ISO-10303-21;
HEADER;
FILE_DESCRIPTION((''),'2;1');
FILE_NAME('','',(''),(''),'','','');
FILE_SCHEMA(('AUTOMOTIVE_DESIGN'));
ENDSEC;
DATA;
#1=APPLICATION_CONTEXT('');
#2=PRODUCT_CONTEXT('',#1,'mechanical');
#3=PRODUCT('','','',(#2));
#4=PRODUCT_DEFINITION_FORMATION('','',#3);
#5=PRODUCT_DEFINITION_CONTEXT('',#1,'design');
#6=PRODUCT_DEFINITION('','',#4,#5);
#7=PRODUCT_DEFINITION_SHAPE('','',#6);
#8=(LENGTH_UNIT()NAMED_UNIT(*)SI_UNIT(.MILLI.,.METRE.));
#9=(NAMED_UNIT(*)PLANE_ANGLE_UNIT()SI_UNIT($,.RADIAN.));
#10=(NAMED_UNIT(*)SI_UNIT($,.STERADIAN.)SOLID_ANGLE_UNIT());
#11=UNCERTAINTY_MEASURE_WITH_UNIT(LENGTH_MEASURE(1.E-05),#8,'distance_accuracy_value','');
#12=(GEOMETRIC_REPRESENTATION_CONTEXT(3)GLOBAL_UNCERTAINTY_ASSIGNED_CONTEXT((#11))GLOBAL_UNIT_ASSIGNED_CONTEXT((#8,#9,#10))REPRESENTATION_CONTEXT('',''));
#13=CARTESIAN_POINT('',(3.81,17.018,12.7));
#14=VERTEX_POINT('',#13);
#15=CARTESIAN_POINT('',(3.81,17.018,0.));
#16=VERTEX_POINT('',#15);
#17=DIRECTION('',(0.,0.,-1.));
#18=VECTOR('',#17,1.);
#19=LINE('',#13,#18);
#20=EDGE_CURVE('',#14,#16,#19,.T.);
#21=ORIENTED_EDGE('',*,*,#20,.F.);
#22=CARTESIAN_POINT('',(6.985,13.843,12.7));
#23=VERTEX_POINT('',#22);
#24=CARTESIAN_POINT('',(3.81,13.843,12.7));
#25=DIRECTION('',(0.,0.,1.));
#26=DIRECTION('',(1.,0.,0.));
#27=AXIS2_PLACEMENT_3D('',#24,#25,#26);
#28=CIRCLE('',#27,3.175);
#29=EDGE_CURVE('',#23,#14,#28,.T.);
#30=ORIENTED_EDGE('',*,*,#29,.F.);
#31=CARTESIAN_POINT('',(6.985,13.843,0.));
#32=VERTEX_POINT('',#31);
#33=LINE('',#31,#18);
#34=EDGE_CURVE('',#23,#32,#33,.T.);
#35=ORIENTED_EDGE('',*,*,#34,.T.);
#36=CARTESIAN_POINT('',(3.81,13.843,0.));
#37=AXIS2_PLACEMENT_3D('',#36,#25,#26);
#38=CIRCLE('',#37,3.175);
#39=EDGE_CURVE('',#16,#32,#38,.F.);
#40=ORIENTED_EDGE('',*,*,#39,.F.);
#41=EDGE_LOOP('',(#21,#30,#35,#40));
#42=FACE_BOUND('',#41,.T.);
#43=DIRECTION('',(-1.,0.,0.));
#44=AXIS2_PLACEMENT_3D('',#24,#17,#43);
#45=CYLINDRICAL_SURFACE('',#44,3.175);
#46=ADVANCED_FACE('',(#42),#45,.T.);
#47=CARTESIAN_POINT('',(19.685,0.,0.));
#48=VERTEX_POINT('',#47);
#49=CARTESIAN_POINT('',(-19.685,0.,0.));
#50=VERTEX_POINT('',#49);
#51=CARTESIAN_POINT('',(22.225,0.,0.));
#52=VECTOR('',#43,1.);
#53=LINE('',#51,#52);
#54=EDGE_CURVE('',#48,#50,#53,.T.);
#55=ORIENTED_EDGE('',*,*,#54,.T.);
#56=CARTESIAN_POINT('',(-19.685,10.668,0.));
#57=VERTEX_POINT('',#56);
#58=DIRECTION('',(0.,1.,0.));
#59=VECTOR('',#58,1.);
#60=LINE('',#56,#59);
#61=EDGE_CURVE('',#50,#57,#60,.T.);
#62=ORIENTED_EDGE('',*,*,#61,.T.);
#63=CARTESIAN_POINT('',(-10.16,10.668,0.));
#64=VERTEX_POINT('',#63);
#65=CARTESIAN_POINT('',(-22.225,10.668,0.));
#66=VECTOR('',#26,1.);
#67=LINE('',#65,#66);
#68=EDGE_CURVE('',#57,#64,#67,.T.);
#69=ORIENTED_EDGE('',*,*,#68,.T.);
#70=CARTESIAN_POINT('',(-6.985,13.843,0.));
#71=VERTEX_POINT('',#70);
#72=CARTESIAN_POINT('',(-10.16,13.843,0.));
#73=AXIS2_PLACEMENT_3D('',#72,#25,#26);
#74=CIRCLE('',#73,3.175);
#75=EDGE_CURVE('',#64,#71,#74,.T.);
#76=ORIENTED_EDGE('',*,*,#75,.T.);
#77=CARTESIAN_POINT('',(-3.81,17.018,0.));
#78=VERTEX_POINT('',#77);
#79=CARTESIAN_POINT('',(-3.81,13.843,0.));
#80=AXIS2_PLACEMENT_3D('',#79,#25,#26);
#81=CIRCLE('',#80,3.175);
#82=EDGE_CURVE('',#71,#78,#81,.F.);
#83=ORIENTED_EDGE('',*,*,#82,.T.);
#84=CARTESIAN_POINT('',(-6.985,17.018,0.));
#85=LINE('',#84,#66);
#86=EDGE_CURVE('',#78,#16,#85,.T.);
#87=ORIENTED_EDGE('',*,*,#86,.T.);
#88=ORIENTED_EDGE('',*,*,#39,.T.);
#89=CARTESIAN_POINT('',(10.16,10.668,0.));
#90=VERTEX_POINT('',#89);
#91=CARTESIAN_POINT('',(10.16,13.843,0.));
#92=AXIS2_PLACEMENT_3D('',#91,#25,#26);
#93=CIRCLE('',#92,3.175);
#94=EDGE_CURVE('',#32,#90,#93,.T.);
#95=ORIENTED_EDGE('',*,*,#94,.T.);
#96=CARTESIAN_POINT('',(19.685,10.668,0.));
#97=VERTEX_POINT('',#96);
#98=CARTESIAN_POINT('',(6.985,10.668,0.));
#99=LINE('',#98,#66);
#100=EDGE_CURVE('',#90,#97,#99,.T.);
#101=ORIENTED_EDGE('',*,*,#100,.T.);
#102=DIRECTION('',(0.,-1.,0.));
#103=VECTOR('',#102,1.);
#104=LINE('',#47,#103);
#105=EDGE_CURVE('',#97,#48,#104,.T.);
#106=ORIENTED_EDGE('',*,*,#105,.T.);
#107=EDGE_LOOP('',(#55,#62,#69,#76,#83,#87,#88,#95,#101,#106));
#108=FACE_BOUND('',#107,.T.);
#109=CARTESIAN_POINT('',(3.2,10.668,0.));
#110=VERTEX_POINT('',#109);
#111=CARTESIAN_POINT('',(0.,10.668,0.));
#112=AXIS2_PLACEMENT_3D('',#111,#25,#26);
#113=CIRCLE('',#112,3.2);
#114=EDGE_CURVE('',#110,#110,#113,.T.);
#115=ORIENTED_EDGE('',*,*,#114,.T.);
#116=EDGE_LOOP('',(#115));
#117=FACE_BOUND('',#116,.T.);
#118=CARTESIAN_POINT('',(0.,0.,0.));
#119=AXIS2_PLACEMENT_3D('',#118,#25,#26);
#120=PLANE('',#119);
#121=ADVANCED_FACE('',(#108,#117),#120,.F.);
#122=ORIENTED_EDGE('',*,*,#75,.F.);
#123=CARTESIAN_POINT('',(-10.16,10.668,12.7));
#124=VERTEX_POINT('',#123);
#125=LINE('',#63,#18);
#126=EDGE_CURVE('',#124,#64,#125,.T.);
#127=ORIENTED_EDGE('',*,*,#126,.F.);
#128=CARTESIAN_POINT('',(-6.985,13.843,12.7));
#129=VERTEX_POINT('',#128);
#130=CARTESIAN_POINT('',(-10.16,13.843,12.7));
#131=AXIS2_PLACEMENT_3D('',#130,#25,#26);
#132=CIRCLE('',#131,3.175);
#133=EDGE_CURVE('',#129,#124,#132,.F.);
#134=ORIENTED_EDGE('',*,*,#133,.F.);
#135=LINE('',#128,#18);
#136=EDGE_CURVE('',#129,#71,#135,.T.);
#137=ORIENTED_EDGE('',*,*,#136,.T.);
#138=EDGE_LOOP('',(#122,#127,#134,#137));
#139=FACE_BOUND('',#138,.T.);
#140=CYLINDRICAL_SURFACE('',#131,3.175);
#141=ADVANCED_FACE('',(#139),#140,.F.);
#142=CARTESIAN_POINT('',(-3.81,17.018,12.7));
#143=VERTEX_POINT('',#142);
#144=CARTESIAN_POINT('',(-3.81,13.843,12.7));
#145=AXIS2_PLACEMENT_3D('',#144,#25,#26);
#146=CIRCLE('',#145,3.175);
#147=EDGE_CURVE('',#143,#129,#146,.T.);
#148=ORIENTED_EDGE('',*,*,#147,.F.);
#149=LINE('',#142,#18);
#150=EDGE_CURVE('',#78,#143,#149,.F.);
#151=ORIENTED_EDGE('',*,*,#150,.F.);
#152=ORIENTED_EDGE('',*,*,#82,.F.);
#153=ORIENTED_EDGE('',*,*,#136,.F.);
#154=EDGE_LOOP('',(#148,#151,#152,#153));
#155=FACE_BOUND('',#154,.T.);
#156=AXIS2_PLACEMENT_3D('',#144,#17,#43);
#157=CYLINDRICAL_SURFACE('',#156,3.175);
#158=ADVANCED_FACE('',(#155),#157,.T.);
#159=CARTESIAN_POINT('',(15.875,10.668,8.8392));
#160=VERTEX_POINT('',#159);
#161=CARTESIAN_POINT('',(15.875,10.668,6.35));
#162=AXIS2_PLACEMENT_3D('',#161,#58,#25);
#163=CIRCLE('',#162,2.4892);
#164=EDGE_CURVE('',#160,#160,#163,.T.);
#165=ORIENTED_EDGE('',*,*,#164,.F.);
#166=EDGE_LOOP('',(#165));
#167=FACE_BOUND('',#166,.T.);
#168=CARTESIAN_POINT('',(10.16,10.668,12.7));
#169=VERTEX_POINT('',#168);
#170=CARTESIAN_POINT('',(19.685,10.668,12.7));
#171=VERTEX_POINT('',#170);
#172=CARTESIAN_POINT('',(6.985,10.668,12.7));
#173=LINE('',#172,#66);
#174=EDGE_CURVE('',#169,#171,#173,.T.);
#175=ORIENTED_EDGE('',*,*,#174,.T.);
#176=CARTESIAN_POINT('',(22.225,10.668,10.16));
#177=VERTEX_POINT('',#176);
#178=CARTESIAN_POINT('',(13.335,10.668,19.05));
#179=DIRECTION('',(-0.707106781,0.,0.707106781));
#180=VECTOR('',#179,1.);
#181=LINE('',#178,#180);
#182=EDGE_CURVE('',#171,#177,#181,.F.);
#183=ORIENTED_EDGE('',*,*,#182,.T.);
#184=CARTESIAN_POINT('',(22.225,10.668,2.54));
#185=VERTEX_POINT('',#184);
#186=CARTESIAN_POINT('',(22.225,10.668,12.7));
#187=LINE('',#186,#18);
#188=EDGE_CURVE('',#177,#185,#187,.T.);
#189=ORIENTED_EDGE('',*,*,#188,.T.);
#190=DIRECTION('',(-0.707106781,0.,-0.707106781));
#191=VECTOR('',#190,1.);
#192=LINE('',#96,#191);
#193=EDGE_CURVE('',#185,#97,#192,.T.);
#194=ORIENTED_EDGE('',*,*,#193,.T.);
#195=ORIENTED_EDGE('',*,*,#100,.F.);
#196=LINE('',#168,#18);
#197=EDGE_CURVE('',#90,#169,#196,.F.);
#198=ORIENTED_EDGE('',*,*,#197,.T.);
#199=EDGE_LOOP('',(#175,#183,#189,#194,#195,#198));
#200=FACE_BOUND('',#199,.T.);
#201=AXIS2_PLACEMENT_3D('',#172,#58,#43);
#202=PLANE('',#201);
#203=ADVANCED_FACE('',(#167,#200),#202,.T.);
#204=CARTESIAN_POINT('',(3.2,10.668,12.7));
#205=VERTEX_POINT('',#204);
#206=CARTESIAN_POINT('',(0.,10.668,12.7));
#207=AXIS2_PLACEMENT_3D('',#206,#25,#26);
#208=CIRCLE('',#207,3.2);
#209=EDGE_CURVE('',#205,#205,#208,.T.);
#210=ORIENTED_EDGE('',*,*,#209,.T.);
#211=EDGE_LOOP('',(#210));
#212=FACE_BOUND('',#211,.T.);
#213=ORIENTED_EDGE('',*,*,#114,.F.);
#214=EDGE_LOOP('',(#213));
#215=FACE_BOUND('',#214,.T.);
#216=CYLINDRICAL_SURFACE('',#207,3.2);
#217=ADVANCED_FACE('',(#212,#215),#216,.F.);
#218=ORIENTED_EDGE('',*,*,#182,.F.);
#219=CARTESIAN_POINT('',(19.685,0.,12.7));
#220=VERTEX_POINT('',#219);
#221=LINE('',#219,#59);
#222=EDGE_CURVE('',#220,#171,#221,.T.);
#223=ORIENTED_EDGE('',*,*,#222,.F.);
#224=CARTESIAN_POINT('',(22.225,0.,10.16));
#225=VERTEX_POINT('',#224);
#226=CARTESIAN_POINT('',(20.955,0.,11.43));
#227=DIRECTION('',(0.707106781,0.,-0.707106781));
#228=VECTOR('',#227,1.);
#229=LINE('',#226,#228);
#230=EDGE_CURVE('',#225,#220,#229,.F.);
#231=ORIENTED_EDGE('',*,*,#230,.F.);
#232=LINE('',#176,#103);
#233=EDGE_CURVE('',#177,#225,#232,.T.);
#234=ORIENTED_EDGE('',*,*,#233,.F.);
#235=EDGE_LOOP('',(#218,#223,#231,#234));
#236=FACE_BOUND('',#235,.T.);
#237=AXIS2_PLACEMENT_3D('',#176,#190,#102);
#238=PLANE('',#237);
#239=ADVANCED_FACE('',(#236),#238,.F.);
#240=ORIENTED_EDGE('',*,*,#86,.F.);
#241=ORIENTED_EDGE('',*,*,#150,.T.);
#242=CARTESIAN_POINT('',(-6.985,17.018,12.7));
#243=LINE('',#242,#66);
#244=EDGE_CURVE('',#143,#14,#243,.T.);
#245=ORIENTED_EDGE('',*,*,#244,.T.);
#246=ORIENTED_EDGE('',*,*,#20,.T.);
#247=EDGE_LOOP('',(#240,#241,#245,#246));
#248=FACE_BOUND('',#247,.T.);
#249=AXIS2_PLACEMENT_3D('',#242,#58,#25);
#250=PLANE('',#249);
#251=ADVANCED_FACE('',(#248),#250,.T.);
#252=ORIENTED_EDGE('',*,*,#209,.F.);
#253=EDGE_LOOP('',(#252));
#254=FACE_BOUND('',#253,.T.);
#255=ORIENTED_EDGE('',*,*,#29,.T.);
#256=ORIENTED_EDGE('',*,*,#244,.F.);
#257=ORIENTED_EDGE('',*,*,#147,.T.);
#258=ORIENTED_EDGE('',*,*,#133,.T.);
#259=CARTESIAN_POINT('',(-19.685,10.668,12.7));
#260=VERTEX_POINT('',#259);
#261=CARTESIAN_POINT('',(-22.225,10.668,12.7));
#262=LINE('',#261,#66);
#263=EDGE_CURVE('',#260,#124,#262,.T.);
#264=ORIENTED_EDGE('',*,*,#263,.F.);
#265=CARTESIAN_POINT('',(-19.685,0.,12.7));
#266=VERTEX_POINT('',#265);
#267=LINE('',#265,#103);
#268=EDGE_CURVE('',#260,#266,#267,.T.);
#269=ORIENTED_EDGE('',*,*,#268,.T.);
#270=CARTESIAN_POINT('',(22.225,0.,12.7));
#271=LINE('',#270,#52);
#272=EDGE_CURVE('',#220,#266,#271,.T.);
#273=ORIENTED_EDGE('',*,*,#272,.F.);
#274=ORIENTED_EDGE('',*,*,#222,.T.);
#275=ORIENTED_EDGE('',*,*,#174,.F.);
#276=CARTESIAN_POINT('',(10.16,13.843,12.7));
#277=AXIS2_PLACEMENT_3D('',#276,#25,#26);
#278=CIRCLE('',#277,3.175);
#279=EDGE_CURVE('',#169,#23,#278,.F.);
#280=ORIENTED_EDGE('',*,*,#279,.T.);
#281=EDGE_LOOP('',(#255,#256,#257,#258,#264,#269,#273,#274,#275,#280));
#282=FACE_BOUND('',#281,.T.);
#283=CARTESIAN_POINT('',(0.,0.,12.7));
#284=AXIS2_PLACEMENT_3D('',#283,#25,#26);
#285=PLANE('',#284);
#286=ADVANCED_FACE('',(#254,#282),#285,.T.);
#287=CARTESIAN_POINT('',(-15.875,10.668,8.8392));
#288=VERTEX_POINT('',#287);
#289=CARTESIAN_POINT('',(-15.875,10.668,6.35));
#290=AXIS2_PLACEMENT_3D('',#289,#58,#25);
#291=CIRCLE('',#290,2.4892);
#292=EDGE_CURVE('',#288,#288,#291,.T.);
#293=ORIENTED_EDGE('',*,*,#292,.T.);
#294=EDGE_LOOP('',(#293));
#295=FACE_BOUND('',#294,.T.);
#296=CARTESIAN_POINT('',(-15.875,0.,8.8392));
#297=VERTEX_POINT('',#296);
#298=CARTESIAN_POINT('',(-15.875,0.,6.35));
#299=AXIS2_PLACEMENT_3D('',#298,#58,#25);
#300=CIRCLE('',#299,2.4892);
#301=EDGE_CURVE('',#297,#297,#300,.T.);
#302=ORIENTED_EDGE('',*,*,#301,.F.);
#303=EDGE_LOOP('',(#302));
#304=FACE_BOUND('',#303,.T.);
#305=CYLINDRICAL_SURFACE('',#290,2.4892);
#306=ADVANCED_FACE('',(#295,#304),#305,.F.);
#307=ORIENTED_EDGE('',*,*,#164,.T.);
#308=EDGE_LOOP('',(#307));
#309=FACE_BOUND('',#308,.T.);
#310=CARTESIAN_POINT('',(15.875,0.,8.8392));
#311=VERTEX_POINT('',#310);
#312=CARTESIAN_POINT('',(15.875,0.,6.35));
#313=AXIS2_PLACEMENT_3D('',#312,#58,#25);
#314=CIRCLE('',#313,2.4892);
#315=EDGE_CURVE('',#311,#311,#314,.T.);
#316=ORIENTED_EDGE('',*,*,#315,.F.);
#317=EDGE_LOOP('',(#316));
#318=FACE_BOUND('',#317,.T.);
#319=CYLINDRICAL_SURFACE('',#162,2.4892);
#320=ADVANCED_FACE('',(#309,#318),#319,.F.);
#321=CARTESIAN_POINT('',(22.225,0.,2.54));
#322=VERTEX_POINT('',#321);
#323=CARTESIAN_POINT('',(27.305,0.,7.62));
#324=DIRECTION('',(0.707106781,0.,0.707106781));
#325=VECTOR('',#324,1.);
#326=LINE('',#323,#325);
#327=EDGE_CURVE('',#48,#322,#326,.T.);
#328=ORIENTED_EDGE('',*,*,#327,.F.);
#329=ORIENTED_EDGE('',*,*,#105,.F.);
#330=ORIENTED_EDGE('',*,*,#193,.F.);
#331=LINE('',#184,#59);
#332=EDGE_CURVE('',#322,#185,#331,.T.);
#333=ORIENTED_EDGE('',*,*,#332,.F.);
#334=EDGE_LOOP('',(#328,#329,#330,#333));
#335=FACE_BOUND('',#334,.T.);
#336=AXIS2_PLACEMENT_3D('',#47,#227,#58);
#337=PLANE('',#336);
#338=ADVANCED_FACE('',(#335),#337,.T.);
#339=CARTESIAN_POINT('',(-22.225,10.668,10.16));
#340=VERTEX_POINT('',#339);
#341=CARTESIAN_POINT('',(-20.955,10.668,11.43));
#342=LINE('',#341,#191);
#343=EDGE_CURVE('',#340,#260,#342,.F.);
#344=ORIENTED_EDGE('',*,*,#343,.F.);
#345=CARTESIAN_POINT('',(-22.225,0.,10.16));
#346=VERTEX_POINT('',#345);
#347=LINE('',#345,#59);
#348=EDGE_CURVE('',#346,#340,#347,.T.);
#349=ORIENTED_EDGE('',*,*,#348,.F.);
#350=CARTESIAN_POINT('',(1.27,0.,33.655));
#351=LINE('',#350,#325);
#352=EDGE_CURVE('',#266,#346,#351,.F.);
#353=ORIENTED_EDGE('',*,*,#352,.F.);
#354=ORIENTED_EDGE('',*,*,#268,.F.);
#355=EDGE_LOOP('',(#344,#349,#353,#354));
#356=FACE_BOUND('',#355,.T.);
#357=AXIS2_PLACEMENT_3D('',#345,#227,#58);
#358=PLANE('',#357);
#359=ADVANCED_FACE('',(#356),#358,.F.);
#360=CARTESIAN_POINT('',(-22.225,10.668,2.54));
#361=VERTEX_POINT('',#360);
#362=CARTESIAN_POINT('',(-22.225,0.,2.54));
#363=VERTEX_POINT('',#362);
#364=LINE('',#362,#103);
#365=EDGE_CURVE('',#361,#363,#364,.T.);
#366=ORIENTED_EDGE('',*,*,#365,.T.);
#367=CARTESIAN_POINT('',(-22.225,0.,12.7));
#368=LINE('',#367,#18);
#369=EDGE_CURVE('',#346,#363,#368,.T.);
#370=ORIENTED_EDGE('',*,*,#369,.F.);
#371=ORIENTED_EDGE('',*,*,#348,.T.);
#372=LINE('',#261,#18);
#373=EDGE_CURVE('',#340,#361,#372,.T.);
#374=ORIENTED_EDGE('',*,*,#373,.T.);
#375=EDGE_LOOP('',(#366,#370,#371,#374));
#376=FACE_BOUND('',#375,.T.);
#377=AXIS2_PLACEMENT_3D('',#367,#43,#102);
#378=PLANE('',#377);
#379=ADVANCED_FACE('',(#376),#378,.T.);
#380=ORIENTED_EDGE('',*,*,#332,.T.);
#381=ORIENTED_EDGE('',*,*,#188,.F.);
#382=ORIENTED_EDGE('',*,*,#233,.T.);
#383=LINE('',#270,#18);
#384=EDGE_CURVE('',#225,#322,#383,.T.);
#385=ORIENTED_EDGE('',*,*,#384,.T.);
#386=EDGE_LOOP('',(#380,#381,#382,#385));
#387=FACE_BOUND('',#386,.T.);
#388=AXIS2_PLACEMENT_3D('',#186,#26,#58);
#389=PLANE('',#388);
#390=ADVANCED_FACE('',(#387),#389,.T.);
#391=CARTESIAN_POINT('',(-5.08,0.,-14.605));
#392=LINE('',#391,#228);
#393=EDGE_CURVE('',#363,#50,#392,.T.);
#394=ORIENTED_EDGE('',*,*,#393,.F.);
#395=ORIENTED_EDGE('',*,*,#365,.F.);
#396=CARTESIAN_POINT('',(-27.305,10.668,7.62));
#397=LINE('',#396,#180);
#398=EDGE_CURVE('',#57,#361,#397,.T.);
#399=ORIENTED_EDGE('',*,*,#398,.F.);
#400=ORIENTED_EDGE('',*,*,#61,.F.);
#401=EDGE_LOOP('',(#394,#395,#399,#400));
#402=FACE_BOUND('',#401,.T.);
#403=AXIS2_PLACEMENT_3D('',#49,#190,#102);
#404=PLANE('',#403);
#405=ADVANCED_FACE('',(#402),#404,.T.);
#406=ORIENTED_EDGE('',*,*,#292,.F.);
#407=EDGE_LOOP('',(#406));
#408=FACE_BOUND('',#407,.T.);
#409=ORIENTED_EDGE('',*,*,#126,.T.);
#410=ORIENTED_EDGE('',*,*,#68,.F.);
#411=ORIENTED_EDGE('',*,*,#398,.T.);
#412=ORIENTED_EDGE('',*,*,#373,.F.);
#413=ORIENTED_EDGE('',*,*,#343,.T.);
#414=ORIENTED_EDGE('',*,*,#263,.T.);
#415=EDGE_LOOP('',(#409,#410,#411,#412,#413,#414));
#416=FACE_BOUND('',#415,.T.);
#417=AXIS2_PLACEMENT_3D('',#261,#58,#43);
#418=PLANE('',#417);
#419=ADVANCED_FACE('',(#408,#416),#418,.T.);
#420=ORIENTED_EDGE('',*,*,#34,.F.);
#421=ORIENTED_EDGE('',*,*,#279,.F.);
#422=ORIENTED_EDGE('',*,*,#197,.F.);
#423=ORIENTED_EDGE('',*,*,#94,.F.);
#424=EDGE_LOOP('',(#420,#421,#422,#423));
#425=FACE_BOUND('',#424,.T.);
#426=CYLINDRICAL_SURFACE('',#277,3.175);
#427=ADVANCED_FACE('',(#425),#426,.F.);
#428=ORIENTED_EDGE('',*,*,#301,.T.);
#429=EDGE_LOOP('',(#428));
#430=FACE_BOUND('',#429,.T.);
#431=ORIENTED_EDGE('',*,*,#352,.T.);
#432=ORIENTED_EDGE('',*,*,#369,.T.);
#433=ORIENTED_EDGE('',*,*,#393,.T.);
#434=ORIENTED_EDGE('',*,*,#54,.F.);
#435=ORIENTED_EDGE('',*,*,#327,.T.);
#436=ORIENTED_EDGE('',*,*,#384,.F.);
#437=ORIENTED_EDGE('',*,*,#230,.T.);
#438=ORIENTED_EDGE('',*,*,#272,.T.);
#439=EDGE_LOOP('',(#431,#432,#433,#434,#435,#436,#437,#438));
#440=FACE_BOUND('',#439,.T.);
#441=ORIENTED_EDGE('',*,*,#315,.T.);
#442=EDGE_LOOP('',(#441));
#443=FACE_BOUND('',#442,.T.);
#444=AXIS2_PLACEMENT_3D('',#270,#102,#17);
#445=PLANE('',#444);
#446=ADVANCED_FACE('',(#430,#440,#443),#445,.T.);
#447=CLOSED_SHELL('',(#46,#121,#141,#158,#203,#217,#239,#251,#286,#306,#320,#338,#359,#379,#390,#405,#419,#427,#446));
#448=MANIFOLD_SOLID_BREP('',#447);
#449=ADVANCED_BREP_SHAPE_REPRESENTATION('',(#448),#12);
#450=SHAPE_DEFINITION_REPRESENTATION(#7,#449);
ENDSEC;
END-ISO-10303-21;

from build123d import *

# Parameters (mm, degrees)
BOSS_EXTRUDE1_DEPTH        = 12.7
CHAMFER1_SIZE              = 2.54
HOLE1_D                    = 4.9784
HOLE2_D                    = 4.9784
F_6_4_6_4_DIAMETER_HOLE1_D = 6.4
FILLET1_START              = -1
FILLET1_DEPTH              = 15
FILLET1_2_DEPTH            = 12.7


with BuildPart() as part:
    # Sketch1 → Boss-Extrude1 (new body)
    with BuildSketch(Plane(origin=(0, 0, 0), x_dir=(-1, 0, 0), z_dir=(0, 0, -1))):
        Polygon((-6.985, 10.668), (-22.225, 10.668), (-22.225, 0), (22.225, 0), (22.225, 10.668), (6.985, 10.668), (6.985, 17.018), (-6.985, 17.018), align=None)
    extrude(amount=-BOSS_EXTRUDE1_DEPTH)

    # Chamfer1
    chamfer1_edges = [part.edges().sort_by_distance(p)[0] for p in [
        (22.225, 5.334, 0),
        (22.225, 5.334, 12.7),
        (-22.225, 5.334, 12.7),
        (-22.225, 5.334, 0),
    ]]
    chamfer(chamfer1_edges, length=CHAMFER1_SIZE)

    # Hole1 (through all)
    with Locations(Plane(origin=(0, 10.668, 0), x_dir=(1, 0, 0), z_dir=(0, 1, 0))):
        with Locations((15.875, -6.35)):
            Hole(HOLE1_D / 2)

    # Hole2 (through all)
    with Locations(Plane(origin=(0, 10.668, 0), x_dir=(1, 0, 0), z_dir=(0, 1, 0))):
        with Locations((-15.875, -6.35)):
            Hole(HOLE2_D / 2)

    # Ø6.4 (6.4) Diameter Hole1 (through all)
    with Locations(Plane.XY.offset(12.7)):
        with Locations((0, 10.668)):
            Hole(F_6_4_6_4_DIAMETER_HOLE1_D / 2)

    # Fillet1: read off the stored shape, not the designer's step
    # Fillet1 outline → Fillet1 (cut)
    with BuildSketch(Plane.XY.offset(FILLET1_START)):
        with BuildLine():
            Line((-6.985, 17.018), (-6.985, 13.843))
            ThreePointArc((-6.985, 13.843), (-6.05506403, 16.08806403), (-3.81, 17.018))
            Line((-3.81, 17.018), (-6.985, 17.018))
        make_face()
        with BuildLine():
            Line((6.985, 17.018), (3.81, 17.018))
            ThreePointArc((3.81, 17.018), (6.05506403, 16.08806403), (6.985, 13.843))
            Line((6.985, 13.843), (6.985, 17.018))
        make_face()
    extrude(amount=FILLET1_DEPTH, mode=Mode.SUBTRACT)

    # Fillet1 2 outline → Fillet1 2 (add)
    with BuildSketch(Plane.XY):
        with BuildLine():
            Line((-6.985, 10.668), (-6.985, 13.843))
            ThreePointArc((-6.985, 13.843), (-7.91493597, 11.59793597), (-10.16, 10.668))
            Line((-10.16, 10.668), (-6.985, 10.668))
        make_face()
        with BuildLine():
            ThreePointArc((10.16, 10.668), (7.91493597, 11.59793597), (6.985, 13.843))
            Line((6.985, 13.843), (6.985, 10.668))
            Line((6.985, 10.668), (10.16, 10.668))
        make_face()
    extrude(amount=FILLET1_2_DEPTH)


solid = part.part
